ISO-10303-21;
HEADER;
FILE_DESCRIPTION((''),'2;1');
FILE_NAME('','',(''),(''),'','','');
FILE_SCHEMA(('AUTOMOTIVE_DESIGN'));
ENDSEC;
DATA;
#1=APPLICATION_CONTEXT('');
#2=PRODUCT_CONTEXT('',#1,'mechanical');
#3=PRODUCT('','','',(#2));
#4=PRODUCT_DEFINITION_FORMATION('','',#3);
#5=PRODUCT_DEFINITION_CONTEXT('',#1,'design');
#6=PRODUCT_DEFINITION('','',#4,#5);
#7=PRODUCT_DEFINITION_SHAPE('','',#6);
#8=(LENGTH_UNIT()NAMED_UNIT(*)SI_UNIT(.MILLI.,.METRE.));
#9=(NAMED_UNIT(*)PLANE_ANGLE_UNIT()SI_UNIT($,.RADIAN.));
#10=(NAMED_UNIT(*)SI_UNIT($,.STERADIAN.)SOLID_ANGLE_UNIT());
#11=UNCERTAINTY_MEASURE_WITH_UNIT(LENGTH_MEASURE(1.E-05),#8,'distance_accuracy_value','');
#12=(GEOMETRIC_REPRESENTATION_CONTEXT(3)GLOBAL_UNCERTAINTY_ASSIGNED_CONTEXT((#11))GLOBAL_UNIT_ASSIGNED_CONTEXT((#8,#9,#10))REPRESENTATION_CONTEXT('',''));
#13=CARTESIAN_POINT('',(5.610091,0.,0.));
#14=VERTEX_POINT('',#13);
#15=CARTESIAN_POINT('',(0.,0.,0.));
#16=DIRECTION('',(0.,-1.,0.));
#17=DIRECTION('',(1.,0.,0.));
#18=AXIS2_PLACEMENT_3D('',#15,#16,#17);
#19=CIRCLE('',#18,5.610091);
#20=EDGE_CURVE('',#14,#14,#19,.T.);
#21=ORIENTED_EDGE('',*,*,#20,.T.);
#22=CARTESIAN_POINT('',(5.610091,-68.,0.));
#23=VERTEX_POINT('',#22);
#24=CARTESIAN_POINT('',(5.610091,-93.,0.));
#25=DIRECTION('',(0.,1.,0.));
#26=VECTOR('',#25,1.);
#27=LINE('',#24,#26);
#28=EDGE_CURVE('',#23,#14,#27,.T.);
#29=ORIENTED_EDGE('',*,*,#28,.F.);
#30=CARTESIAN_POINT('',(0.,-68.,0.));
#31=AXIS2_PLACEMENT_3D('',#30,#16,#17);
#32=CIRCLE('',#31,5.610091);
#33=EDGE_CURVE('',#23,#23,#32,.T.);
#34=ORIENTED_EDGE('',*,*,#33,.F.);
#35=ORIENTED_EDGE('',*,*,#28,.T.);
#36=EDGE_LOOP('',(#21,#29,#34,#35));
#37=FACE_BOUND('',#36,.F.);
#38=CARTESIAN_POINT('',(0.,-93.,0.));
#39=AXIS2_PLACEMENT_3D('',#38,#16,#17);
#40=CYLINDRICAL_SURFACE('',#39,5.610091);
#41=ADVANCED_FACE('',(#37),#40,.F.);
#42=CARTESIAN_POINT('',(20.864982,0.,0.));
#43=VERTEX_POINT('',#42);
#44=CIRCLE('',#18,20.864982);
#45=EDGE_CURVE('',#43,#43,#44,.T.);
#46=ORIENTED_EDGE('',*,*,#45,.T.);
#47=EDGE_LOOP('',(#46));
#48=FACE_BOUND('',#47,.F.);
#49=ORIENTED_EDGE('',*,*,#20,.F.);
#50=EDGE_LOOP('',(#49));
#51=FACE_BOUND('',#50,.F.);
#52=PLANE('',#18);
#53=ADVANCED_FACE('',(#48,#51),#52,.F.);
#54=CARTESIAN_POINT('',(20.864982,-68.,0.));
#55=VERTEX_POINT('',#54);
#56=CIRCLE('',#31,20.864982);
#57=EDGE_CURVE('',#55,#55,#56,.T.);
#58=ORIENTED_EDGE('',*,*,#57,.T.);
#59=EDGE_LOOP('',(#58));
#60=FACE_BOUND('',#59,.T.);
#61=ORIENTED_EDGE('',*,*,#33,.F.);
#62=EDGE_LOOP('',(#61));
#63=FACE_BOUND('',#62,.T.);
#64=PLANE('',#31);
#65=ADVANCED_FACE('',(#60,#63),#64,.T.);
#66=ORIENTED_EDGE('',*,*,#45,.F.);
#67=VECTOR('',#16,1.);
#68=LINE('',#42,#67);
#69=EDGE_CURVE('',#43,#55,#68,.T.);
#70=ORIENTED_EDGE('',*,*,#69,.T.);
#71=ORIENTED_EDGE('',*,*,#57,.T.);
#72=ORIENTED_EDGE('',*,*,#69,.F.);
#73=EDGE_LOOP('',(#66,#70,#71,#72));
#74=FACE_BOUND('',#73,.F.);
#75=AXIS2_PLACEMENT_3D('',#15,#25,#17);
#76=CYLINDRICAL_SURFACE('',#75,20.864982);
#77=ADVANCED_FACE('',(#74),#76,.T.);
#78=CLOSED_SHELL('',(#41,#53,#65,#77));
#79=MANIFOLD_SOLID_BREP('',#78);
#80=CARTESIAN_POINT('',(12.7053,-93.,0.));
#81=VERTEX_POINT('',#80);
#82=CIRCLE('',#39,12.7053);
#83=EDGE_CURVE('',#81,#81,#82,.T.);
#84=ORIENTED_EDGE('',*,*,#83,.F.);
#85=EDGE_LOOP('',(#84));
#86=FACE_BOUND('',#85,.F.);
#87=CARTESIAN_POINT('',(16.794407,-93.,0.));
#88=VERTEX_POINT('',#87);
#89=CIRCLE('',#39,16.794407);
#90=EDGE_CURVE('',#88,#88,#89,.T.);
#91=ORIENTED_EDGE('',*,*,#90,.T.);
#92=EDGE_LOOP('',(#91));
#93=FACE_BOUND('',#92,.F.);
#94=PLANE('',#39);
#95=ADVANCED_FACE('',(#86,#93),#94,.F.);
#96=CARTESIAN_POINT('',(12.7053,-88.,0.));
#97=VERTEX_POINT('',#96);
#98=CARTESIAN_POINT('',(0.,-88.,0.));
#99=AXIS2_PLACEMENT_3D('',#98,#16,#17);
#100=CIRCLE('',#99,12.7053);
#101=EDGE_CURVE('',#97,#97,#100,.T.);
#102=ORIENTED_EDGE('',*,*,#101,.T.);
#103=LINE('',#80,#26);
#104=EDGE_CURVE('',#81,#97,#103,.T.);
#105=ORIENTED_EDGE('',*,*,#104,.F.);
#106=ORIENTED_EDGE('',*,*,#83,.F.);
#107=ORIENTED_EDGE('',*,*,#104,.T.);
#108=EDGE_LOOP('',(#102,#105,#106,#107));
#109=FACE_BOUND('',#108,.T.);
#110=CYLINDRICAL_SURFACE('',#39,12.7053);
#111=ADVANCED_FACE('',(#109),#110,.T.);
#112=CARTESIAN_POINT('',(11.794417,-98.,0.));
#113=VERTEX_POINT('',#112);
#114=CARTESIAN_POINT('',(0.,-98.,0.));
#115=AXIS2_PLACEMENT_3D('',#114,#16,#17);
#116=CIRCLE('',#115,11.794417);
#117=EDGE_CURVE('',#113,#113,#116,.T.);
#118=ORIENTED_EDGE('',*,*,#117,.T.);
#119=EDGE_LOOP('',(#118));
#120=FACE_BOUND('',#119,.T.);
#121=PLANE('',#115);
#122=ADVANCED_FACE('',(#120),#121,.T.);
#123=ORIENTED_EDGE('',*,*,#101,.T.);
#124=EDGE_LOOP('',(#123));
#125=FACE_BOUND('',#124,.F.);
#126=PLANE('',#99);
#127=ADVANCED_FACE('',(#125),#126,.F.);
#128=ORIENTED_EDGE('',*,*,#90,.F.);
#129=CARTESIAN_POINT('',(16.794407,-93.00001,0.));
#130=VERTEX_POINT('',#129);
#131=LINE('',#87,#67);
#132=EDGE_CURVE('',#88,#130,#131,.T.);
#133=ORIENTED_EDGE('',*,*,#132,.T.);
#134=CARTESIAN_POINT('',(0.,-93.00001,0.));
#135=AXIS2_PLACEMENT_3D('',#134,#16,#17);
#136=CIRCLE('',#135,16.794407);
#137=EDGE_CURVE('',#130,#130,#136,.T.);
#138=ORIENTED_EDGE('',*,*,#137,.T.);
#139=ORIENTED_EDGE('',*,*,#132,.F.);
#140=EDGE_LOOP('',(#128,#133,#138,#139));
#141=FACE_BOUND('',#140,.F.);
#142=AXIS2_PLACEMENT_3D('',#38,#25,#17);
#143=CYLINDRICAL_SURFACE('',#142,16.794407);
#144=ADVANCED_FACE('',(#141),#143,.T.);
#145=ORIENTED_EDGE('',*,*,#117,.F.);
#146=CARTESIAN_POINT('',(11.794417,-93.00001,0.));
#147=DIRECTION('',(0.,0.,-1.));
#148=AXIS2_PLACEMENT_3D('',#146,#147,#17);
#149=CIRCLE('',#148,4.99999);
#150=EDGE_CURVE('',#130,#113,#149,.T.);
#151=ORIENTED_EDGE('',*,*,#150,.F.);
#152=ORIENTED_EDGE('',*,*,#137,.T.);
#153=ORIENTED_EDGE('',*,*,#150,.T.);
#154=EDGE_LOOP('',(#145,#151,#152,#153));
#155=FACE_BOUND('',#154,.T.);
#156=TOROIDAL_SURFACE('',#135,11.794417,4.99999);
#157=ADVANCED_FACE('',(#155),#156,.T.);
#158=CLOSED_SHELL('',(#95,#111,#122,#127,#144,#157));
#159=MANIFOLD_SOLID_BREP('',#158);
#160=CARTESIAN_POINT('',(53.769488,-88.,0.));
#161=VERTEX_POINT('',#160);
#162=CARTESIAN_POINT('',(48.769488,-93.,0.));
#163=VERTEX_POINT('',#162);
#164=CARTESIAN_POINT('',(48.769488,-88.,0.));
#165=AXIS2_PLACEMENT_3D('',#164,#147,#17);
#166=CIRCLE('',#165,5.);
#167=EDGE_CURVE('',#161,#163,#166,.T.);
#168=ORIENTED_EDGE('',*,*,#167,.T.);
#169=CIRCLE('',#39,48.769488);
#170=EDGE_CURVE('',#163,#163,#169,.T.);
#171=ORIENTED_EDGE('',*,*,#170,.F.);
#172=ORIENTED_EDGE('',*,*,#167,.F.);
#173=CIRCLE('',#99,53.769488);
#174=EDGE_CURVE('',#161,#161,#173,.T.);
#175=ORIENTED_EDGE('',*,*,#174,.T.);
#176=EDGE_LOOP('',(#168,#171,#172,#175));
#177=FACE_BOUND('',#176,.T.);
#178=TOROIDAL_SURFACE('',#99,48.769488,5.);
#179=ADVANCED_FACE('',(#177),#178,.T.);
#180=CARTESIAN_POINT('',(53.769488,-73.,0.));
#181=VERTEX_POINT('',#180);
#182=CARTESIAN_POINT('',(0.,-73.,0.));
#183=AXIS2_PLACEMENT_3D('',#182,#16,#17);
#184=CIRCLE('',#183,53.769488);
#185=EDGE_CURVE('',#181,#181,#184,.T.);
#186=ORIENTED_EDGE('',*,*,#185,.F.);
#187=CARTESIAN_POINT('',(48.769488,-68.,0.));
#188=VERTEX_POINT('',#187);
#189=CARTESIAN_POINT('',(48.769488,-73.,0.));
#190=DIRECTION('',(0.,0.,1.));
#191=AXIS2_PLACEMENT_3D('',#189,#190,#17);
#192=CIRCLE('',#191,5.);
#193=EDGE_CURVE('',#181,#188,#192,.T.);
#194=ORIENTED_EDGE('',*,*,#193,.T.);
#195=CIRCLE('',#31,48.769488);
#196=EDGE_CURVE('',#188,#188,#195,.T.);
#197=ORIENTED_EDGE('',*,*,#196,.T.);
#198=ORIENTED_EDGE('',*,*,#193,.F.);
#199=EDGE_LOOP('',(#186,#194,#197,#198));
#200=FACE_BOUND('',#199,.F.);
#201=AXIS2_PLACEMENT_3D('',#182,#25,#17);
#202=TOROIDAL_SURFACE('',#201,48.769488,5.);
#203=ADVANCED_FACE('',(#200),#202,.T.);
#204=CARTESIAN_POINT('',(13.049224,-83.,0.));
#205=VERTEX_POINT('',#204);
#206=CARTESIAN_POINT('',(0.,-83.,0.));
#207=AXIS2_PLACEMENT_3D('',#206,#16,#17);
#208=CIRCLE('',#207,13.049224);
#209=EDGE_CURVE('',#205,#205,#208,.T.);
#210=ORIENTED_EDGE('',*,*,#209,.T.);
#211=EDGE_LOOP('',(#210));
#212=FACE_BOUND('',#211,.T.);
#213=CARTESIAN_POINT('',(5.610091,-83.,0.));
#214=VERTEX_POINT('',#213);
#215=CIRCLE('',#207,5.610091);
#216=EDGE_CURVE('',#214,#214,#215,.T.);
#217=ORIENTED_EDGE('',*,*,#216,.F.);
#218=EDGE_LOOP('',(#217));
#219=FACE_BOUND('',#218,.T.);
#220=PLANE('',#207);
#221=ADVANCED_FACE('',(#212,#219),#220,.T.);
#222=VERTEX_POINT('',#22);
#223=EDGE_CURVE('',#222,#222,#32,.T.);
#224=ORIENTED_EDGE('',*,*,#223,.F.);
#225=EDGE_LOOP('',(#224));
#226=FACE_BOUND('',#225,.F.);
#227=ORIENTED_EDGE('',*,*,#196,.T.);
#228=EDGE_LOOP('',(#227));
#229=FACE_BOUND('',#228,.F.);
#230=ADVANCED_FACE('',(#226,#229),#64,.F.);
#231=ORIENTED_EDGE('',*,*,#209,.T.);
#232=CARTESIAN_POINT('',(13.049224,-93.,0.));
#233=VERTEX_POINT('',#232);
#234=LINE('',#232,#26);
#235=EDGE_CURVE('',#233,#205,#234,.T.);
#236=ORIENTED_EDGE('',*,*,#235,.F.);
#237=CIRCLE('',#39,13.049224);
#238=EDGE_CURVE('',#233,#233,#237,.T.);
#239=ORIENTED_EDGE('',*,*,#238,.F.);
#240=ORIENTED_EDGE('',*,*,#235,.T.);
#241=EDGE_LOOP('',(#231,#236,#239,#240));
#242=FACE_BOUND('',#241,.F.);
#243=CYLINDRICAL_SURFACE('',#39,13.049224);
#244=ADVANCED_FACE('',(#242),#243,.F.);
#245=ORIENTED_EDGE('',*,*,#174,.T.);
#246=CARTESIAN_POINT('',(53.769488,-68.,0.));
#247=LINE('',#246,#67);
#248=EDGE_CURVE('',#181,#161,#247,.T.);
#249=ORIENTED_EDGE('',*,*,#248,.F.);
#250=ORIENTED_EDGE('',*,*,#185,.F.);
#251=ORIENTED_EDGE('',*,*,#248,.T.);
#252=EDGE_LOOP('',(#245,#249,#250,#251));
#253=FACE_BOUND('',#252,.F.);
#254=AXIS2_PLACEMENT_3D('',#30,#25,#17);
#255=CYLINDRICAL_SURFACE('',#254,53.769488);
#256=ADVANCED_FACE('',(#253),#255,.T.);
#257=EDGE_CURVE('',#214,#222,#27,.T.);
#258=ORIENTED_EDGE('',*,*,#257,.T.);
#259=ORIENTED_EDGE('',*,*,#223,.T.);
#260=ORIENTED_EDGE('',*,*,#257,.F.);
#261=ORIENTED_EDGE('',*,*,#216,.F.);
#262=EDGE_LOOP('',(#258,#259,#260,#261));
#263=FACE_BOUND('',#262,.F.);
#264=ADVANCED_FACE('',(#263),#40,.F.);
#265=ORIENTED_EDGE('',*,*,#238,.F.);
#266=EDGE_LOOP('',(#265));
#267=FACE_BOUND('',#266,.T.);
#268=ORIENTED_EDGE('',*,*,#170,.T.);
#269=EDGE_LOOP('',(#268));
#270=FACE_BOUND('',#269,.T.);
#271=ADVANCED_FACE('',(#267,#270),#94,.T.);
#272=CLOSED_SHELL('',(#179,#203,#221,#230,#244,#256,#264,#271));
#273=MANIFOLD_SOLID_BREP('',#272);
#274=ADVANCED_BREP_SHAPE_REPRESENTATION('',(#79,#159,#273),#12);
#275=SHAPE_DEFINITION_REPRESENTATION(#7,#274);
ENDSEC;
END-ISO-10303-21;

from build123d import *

# Parameters (mm, degrees)
F0_R      = 20.8649821503
F1_DEPTH  = 68
F2_R      = 53.7694879876
F2_R_2    = 20.8649821503
F3_DEPTH  = 25
F4_R      = 5.6100913923
F5_DEPTH  = 93.001
F7_R      = 5
F8_R      = 13.049224489
F8_R_2    = 5.6100913923
F9_DEPTH  = 10
F10_R     = 12.7052996832
F11_DEPTH = 5
F10_R_2   = 16.7944070529
F10_R_3   = 13.049224489
F12_DEPTH = 5
F13_R     = 4.99999


# Not quite as in the source:
# - a fillet or chamfer is up to 0.001 mm smaller than in the source, because OpenCascade refuses the exact size


with BuildPart() as f1:
    # F0 (on Front) → F1 (new body)
    with BuildSketch(Plane.XZ):
        Circle(F0_R)
    extrude(amount=F1_DEPTH)


with BuildPart() as f3:
    # F2 (on face) → F3 (new body)
    with BuildSketch(Plane.XZ.offset(68)):
        Circle(F2_R)
        Circle(F2_R_2, mode=Mode.SUBTRACT)
        Circle(F2_R_2)
    extrude(amount=F3_DEPTH)


with BuildPart() as f5:
    # F4 (on face) → F5 (new body, through all)
    with BuildSketch(Plane.XZ.offset(93)):
        Circle(F4_R)
    extrude(amount=-F5_DEPTH)


with BuildPart() as f1_1:
    add(f1.part)

    # F6: cut F5
    add(f5.part, mode=Mode.SUBTRACT)


with BuildPart() as f3_1:
    add(f3.part)

    # F6: cut F5
    add(f5.part, mode=Mode.SUBTRACT)

    # F7
    f7_edges = [f3_1.edges().sort_by_distance(p)[0] for p in [
        (-53.769488, -93, 0),
        (-53.769488, -68, 0),
    ]]
    fillet(f7_edges, radius=F7_R)

    # F8 (on face) → F9 (cut)
    with BuildSketch(Plane.XZ.offset(93)):
        Circle(F8_R)
        Circle(F8_R_2, mode=Mode.SUBTRACT)
    extrude(amount=-F9_DEPTH, mode=Mode.SUBTRACT)


with BuildPart() as f11:
    # F10 (on face) → F11 (new body)
    with BuildSketch(Plane.XZ.offset(93)):
        Circle(F10_R)
    extrude(amount=-F11_DEPTH)

    # F10 (on face) → F12 (join)
    with BuildSketch(Plane.XZ.offset(93)):
        Circle(F10_R_2)
        Circle(F10_R_3, mode=Mode.SUBTRACT)
        Circle(F10_R_3)
        Circle(F10_R, mode=Mode.SUBTRACT)
        Circle(F10_R)
    extrude(amount=F12_DEPTH)

    # F13 (radius 5 in the source; OpenCascade refuses exactly that, so slightly less here)
    f13_edges = [f11.edges().sort_by_distance(p)[0] for p in [
        (-16.794407, -98, 0),
    ]]
    fillet(f13_edges, radius=F13_R)


solid = Compound([f1_1.part, f3_1.part, f11.part])
